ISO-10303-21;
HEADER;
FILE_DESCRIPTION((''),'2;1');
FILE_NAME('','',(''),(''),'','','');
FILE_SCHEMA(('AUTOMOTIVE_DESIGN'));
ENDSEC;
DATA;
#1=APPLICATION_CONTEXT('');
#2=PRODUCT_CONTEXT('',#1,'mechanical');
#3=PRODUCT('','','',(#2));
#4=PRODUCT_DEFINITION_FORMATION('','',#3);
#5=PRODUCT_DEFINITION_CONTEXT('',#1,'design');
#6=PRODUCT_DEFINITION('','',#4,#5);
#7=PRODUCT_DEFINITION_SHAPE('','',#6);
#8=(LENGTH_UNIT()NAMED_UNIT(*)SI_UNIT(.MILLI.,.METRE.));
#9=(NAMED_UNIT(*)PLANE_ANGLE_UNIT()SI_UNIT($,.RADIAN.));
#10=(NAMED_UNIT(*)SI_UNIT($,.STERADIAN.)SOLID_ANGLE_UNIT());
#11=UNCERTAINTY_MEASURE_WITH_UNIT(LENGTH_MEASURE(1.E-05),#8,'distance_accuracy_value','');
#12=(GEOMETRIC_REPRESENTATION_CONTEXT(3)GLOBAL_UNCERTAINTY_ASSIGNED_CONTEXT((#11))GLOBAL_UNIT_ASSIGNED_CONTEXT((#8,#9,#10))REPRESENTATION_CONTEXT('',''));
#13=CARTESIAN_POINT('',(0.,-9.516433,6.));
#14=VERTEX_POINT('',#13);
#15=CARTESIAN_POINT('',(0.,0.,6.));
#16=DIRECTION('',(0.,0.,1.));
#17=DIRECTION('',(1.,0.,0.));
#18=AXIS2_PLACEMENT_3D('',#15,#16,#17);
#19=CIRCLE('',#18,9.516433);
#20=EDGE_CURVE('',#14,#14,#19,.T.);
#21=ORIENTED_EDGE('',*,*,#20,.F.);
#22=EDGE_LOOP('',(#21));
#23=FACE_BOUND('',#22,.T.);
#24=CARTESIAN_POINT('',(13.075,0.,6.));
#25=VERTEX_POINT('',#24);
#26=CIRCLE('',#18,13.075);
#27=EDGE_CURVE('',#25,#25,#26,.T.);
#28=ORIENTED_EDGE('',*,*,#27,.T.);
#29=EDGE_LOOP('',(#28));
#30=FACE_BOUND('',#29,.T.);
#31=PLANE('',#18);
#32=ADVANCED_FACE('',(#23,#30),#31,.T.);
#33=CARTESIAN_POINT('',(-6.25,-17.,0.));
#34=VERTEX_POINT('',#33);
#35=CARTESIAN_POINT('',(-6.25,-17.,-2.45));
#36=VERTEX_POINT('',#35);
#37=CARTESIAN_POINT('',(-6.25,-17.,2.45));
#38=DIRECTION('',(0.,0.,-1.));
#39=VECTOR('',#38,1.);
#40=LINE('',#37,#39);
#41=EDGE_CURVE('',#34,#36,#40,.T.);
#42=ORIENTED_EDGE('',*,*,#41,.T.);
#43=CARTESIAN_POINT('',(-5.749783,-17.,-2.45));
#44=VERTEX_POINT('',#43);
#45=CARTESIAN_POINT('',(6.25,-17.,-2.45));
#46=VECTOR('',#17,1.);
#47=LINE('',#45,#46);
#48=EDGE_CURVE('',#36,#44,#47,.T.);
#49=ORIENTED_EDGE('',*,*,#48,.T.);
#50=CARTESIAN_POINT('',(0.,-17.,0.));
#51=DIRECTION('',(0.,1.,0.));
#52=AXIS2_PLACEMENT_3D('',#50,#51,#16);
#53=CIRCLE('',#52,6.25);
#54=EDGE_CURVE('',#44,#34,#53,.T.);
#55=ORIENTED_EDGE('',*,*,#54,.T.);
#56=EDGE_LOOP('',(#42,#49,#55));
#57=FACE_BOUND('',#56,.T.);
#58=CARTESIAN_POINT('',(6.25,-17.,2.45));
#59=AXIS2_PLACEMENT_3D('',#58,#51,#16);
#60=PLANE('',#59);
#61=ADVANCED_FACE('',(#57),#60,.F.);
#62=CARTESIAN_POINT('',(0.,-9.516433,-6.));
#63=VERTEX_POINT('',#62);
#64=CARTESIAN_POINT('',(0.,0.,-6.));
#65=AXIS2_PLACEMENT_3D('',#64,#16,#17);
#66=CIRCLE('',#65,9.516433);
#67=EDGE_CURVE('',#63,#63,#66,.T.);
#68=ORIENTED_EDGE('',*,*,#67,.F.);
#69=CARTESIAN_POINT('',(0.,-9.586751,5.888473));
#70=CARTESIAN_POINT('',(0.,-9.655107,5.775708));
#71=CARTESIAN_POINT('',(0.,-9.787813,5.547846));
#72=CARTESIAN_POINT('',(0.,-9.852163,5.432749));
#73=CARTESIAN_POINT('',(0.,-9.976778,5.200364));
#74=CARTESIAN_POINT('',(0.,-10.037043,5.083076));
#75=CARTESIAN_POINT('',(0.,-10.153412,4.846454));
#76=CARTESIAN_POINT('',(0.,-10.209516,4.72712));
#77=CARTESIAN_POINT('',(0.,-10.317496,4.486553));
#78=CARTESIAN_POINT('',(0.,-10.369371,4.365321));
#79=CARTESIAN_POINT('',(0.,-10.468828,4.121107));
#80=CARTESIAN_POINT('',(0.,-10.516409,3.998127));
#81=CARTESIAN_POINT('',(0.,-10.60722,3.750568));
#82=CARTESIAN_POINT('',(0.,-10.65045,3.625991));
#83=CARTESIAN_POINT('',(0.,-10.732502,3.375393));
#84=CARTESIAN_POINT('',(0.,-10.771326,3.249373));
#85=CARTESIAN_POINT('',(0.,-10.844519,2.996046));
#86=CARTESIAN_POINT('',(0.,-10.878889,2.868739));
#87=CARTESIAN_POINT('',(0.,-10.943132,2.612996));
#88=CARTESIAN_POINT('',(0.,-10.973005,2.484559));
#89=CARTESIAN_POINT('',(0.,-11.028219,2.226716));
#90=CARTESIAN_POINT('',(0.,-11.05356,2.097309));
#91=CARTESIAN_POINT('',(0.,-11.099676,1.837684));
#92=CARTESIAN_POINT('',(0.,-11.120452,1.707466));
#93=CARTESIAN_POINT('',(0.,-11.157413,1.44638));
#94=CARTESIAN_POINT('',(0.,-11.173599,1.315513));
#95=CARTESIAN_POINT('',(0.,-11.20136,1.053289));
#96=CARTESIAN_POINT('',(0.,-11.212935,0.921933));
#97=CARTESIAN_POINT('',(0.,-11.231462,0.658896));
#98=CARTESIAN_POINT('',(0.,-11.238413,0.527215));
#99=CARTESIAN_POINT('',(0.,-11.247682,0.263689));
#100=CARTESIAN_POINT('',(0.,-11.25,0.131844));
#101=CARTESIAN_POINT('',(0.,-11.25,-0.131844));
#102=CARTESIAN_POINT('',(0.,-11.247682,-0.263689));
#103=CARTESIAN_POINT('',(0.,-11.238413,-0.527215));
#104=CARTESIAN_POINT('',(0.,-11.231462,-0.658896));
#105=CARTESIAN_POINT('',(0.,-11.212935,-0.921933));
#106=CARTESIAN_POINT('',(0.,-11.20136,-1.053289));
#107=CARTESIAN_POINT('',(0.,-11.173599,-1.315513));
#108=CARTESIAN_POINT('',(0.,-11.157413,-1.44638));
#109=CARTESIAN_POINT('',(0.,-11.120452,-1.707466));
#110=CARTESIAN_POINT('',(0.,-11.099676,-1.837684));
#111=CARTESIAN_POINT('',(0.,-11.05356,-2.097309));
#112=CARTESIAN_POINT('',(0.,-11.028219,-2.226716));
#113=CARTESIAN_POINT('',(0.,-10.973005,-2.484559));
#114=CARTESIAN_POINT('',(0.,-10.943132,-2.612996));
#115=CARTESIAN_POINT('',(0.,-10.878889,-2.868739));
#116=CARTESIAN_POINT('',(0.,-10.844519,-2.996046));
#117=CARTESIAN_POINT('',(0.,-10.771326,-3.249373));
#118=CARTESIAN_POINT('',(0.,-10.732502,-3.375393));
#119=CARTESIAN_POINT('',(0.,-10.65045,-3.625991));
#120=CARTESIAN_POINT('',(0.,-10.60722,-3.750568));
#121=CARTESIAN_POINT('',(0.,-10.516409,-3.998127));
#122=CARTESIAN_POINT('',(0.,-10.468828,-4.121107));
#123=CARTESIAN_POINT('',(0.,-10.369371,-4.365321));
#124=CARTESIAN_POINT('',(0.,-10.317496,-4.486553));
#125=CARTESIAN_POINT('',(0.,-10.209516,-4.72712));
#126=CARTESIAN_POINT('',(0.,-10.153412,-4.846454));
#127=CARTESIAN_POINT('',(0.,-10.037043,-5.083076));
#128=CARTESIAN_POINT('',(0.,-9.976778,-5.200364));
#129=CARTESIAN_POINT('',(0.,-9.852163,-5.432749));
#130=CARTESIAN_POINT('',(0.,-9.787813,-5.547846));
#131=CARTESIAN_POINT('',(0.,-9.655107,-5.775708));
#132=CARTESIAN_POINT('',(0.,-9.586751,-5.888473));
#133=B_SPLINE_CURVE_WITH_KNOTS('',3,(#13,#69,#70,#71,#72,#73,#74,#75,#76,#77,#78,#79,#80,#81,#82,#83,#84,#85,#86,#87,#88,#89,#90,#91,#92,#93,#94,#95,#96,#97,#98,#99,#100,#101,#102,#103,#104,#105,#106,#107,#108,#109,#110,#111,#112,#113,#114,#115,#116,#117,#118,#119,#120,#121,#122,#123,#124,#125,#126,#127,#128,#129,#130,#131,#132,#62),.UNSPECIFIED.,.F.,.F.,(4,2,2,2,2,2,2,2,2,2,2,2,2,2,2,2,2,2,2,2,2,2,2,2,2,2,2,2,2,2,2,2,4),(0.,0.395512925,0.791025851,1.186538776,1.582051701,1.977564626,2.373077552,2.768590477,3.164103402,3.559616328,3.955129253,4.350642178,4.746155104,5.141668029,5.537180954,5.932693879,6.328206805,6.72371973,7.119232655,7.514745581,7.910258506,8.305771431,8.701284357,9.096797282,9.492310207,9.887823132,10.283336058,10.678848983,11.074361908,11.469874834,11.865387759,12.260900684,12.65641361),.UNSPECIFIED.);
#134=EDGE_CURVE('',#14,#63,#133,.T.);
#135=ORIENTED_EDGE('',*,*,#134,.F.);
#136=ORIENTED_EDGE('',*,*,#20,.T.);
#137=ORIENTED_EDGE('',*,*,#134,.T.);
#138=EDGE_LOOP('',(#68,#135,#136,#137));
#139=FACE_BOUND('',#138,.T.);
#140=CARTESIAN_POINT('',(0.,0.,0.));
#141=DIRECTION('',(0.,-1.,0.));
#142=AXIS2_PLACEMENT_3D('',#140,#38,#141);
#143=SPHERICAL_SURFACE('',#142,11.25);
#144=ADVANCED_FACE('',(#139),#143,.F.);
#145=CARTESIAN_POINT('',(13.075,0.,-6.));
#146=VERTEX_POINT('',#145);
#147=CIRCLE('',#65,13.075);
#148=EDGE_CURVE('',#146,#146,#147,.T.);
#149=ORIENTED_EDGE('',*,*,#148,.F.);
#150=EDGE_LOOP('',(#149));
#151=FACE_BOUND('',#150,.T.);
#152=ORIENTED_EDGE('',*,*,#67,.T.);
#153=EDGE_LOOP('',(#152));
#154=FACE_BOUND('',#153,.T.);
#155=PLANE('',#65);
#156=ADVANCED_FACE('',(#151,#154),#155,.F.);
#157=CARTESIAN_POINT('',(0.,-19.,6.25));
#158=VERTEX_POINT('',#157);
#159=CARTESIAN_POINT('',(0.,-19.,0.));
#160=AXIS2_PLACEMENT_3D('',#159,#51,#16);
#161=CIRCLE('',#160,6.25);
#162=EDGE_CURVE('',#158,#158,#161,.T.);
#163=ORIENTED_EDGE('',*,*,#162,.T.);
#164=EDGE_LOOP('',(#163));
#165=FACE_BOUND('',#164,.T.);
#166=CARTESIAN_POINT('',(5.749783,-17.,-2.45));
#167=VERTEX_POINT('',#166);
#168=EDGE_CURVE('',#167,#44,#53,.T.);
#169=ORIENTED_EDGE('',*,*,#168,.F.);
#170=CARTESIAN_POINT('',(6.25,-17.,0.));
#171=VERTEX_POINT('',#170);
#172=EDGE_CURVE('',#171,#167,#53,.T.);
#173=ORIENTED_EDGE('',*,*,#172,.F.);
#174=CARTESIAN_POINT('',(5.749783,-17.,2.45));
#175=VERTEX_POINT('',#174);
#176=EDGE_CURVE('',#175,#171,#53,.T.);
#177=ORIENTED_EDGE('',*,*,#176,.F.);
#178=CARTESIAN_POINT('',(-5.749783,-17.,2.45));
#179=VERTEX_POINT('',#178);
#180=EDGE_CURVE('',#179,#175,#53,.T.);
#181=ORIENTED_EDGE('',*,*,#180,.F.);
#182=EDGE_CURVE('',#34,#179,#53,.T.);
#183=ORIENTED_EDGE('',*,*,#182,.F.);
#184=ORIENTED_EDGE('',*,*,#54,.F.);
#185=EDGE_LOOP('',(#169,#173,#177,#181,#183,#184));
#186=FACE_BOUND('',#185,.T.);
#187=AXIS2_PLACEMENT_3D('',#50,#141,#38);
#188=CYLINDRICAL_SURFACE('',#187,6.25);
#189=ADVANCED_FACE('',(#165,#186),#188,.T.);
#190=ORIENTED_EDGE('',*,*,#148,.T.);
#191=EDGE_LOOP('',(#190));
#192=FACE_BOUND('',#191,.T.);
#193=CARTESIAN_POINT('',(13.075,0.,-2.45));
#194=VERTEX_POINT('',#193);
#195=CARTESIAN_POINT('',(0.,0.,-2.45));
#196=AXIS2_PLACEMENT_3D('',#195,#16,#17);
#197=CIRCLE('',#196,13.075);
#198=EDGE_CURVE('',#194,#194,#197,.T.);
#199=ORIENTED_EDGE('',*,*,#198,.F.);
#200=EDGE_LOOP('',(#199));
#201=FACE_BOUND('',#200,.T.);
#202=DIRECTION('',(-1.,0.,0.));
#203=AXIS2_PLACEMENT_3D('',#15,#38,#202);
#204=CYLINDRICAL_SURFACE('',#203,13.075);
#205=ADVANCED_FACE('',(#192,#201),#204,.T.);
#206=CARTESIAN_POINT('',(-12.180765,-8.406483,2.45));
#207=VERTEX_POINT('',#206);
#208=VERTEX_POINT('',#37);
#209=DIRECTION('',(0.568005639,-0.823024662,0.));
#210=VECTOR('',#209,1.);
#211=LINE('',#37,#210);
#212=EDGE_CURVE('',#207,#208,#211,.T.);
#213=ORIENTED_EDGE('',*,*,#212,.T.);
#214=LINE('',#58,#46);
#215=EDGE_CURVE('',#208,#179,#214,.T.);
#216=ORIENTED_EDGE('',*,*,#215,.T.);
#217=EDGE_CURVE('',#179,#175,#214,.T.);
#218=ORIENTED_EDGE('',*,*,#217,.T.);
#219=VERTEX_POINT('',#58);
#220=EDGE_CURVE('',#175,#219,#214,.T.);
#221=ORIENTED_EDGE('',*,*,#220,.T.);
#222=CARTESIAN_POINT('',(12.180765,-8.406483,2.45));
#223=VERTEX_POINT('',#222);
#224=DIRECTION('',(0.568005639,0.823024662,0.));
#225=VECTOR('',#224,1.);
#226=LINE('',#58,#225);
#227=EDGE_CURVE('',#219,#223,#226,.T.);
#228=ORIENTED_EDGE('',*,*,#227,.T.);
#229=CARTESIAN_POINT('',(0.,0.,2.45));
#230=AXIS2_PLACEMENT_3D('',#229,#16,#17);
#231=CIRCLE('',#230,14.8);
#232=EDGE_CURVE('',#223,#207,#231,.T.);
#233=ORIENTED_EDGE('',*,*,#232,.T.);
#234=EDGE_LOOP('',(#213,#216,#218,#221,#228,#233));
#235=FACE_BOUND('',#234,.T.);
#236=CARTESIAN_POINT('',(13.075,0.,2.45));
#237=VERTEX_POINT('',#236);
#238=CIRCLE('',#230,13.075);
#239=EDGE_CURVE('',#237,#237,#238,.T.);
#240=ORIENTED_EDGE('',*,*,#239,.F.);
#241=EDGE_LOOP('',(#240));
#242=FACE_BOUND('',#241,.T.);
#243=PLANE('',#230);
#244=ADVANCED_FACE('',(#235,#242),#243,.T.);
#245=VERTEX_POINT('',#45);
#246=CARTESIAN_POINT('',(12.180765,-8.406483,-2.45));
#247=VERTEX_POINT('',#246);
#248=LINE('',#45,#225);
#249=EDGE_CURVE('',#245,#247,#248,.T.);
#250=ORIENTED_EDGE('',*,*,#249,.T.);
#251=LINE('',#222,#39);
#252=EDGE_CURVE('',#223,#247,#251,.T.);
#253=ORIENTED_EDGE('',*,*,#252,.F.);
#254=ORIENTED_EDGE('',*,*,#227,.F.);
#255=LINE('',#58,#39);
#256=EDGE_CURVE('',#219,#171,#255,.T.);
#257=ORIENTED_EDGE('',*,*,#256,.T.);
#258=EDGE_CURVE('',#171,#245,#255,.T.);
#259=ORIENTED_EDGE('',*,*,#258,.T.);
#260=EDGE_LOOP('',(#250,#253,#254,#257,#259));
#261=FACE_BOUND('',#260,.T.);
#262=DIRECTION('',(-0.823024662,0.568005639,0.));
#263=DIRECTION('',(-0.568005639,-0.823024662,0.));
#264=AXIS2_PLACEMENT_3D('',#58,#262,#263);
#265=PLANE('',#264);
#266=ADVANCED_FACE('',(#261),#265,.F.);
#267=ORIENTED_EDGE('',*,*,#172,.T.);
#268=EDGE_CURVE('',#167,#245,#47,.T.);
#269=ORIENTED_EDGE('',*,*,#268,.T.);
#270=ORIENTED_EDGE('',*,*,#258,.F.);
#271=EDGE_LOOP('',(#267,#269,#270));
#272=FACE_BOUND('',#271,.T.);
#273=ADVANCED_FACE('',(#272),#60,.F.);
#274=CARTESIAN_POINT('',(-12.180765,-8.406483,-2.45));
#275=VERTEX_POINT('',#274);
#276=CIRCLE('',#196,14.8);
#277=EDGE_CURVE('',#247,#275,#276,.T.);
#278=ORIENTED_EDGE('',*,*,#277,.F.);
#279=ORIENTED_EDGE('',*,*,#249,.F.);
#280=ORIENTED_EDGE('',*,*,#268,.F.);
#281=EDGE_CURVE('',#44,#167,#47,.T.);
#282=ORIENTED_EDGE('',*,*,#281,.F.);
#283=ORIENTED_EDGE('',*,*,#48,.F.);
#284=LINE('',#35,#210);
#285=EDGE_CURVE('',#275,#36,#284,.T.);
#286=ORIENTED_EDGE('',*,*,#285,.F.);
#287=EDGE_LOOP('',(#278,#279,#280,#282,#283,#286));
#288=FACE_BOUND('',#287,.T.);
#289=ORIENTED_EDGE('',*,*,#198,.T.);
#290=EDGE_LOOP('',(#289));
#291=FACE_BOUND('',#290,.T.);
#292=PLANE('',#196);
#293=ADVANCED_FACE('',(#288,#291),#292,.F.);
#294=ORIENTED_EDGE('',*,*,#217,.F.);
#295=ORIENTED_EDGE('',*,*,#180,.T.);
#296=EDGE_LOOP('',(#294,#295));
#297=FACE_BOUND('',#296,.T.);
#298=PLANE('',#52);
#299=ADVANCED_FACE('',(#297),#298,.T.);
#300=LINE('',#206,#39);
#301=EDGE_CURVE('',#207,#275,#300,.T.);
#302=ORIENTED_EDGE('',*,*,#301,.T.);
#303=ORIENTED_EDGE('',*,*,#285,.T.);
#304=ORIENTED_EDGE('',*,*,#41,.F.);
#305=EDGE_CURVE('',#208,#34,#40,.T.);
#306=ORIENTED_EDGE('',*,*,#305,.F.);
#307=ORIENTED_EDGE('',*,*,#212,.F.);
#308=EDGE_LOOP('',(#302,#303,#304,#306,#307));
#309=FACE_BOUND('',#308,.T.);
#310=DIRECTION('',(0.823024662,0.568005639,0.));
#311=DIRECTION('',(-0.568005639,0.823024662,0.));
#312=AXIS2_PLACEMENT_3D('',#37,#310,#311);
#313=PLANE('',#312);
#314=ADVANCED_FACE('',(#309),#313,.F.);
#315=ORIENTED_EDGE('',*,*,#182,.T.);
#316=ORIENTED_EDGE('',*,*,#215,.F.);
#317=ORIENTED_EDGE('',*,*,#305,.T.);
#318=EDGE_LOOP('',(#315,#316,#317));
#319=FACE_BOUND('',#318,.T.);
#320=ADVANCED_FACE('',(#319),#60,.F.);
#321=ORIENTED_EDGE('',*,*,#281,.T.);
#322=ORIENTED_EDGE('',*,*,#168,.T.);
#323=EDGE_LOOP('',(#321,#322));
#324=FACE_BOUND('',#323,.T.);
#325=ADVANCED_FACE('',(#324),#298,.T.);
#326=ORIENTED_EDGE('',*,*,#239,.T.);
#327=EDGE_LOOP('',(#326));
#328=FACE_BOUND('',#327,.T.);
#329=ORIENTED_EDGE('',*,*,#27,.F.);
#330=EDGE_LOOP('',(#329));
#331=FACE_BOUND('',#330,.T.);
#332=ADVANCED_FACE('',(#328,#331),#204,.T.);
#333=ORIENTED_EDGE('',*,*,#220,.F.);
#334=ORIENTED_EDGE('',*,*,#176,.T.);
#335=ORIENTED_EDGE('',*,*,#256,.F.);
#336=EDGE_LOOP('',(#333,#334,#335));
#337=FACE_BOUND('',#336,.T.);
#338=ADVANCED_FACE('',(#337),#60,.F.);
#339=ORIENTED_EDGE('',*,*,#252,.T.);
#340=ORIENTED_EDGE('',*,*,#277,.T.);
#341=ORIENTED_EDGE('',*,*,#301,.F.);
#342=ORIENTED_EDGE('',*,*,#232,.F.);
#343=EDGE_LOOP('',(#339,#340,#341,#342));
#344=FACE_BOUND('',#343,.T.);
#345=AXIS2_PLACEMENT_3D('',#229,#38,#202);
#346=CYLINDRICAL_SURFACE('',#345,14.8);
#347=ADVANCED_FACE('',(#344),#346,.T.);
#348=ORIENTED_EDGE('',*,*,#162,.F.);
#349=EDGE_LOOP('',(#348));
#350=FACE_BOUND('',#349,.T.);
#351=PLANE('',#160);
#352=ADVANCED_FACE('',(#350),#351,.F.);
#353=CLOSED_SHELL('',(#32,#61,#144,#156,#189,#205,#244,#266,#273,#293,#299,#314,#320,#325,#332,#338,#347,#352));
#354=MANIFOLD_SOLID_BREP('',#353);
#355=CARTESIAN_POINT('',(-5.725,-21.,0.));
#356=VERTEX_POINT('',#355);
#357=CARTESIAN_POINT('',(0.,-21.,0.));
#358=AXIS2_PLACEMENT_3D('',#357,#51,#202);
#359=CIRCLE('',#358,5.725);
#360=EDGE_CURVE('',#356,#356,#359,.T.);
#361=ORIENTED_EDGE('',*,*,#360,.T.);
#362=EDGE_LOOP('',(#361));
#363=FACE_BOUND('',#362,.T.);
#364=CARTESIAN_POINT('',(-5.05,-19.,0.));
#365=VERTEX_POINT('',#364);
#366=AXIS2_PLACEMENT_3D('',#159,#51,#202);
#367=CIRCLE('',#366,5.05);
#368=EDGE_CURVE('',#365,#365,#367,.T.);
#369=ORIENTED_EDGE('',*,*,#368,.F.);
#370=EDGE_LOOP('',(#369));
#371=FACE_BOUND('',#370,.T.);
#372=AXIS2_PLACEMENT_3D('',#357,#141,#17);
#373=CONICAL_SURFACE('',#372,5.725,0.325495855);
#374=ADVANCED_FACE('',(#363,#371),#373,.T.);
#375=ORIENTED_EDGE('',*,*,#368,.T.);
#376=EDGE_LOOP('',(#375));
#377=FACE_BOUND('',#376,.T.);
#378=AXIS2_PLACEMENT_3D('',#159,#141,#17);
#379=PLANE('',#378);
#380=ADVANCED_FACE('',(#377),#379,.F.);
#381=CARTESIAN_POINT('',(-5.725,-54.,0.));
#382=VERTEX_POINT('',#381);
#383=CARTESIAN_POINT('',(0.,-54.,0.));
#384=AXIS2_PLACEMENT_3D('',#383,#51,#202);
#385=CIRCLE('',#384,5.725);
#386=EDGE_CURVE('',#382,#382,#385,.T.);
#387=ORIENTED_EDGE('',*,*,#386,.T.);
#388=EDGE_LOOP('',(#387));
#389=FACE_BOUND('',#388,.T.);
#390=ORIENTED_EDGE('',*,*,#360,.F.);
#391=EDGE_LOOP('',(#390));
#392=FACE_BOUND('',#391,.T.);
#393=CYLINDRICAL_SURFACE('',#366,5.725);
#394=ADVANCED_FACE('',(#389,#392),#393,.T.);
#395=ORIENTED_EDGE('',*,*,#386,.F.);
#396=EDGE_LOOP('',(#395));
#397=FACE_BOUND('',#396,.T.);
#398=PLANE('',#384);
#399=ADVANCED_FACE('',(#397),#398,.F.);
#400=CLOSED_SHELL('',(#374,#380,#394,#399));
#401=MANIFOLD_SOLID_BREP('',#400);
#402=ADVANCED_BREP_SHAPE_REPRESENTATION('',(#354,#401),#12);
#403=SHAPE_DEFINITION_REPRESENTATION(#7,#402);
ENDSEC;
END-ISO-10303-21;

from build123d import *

# Parameters (mm, degrees)
SKETCH_1_R      = 13.075
EXTRUDE_1_DEPTH = 6
SKETCH_1_4_R    = 13.075
EXTRUDE_2_DEPTH = 2.45
SKETCH_3_R      = 6.25
EXTRUDE_5_DEPTH = 2
EXTRUDE_6_DEPTH = 2.45


with BuildPart() as part:
    # 스케치1 → 보스-돌출1 (new, symmetric)
    with BuildSketch(Plane.XY):
        Circle(SKETCH_1_R)
    extrude(amount=EXTRUDE_1_DEPTH, both=True)

    # 스케치1<4> → 보스-돌출2 (add, symmetric)
    with BuildSketch(Plane.XY):
        with BuildLine():
            ThreePointArc((14.8, 0), (0, 14.8), (-14.8, 0))
            ThreePointArc((-14.8, 0), (0, -14.8), (14.8, 0))
        make_face()
        Circle(SKETCH_1_4_R, mode=Mode.SUBTRACT)
    extrude(amount=EXTRUDE_2_DEPTH, both=True)

    # 스케치6 → 컷-회전6 (revolve, cut)
    with BuildSketch(Plane(origin=(0, 0, 0), x_dir=(0, 0, -1), z_dir=(1, 0, 0))):
        with BuildLine():
            Line((-11.25, 0), (11.25, 0))
            ThreePointArc((11.25, 0), (0, 11.25), (-11.25, 0))
        make_face()
    revolve(axis=Axis((0, 0, -11.25), (0, 0, 1)), mode=Mode.SUBTRACT)



with BuildPart() as body_2:
    # 스케치3 → 보스-돌출5 (new body)
    with BuildSketch(Plane(origin=(0, -19, 0), x_dir=(1, 0, 0), z_dir=(0, 1, 0))):
        Circle(SKETCH_3_R)
    extrude(amount=EXTRUDE_5_DEPTH)


with BuildPart() as body_3:
    # 스케치4 → 회전1 (revolve)
    with BuildSketch(Plane.XY):
        Polygon((0, -19), (5.05, -19), (5.725, -21), (5.725, -54), (0, -54), align=None)
    revolve(axis=Axis((0, -19, 0), (0, -1, 0)))


with BuildPart() as part_1:
    add(part.part)

    add(body_2.part)  # 보스-돌출6 merges body 2
    # 스케치7 → 보스-돌출6 (add, symmetric)
    with BuildSketch(Plane.XY):
        with BuildLine():
            Line((6.25, -17), (-6.25, -17))
            Line((-6.25, -17), (-12.180764996, -8.406483457))
            ThreePointArc((-12.180764996, -8.406483457), (0, -14.8), (12.180764996, -8.406483457))
            Line((12.180764996, -8.406483457), (6.25, -17))
        make_face()
    extrude(amount=EXTRUDE_6_DEPTH, both=True)


solid = Compound([body_3.part, part_1.part])
